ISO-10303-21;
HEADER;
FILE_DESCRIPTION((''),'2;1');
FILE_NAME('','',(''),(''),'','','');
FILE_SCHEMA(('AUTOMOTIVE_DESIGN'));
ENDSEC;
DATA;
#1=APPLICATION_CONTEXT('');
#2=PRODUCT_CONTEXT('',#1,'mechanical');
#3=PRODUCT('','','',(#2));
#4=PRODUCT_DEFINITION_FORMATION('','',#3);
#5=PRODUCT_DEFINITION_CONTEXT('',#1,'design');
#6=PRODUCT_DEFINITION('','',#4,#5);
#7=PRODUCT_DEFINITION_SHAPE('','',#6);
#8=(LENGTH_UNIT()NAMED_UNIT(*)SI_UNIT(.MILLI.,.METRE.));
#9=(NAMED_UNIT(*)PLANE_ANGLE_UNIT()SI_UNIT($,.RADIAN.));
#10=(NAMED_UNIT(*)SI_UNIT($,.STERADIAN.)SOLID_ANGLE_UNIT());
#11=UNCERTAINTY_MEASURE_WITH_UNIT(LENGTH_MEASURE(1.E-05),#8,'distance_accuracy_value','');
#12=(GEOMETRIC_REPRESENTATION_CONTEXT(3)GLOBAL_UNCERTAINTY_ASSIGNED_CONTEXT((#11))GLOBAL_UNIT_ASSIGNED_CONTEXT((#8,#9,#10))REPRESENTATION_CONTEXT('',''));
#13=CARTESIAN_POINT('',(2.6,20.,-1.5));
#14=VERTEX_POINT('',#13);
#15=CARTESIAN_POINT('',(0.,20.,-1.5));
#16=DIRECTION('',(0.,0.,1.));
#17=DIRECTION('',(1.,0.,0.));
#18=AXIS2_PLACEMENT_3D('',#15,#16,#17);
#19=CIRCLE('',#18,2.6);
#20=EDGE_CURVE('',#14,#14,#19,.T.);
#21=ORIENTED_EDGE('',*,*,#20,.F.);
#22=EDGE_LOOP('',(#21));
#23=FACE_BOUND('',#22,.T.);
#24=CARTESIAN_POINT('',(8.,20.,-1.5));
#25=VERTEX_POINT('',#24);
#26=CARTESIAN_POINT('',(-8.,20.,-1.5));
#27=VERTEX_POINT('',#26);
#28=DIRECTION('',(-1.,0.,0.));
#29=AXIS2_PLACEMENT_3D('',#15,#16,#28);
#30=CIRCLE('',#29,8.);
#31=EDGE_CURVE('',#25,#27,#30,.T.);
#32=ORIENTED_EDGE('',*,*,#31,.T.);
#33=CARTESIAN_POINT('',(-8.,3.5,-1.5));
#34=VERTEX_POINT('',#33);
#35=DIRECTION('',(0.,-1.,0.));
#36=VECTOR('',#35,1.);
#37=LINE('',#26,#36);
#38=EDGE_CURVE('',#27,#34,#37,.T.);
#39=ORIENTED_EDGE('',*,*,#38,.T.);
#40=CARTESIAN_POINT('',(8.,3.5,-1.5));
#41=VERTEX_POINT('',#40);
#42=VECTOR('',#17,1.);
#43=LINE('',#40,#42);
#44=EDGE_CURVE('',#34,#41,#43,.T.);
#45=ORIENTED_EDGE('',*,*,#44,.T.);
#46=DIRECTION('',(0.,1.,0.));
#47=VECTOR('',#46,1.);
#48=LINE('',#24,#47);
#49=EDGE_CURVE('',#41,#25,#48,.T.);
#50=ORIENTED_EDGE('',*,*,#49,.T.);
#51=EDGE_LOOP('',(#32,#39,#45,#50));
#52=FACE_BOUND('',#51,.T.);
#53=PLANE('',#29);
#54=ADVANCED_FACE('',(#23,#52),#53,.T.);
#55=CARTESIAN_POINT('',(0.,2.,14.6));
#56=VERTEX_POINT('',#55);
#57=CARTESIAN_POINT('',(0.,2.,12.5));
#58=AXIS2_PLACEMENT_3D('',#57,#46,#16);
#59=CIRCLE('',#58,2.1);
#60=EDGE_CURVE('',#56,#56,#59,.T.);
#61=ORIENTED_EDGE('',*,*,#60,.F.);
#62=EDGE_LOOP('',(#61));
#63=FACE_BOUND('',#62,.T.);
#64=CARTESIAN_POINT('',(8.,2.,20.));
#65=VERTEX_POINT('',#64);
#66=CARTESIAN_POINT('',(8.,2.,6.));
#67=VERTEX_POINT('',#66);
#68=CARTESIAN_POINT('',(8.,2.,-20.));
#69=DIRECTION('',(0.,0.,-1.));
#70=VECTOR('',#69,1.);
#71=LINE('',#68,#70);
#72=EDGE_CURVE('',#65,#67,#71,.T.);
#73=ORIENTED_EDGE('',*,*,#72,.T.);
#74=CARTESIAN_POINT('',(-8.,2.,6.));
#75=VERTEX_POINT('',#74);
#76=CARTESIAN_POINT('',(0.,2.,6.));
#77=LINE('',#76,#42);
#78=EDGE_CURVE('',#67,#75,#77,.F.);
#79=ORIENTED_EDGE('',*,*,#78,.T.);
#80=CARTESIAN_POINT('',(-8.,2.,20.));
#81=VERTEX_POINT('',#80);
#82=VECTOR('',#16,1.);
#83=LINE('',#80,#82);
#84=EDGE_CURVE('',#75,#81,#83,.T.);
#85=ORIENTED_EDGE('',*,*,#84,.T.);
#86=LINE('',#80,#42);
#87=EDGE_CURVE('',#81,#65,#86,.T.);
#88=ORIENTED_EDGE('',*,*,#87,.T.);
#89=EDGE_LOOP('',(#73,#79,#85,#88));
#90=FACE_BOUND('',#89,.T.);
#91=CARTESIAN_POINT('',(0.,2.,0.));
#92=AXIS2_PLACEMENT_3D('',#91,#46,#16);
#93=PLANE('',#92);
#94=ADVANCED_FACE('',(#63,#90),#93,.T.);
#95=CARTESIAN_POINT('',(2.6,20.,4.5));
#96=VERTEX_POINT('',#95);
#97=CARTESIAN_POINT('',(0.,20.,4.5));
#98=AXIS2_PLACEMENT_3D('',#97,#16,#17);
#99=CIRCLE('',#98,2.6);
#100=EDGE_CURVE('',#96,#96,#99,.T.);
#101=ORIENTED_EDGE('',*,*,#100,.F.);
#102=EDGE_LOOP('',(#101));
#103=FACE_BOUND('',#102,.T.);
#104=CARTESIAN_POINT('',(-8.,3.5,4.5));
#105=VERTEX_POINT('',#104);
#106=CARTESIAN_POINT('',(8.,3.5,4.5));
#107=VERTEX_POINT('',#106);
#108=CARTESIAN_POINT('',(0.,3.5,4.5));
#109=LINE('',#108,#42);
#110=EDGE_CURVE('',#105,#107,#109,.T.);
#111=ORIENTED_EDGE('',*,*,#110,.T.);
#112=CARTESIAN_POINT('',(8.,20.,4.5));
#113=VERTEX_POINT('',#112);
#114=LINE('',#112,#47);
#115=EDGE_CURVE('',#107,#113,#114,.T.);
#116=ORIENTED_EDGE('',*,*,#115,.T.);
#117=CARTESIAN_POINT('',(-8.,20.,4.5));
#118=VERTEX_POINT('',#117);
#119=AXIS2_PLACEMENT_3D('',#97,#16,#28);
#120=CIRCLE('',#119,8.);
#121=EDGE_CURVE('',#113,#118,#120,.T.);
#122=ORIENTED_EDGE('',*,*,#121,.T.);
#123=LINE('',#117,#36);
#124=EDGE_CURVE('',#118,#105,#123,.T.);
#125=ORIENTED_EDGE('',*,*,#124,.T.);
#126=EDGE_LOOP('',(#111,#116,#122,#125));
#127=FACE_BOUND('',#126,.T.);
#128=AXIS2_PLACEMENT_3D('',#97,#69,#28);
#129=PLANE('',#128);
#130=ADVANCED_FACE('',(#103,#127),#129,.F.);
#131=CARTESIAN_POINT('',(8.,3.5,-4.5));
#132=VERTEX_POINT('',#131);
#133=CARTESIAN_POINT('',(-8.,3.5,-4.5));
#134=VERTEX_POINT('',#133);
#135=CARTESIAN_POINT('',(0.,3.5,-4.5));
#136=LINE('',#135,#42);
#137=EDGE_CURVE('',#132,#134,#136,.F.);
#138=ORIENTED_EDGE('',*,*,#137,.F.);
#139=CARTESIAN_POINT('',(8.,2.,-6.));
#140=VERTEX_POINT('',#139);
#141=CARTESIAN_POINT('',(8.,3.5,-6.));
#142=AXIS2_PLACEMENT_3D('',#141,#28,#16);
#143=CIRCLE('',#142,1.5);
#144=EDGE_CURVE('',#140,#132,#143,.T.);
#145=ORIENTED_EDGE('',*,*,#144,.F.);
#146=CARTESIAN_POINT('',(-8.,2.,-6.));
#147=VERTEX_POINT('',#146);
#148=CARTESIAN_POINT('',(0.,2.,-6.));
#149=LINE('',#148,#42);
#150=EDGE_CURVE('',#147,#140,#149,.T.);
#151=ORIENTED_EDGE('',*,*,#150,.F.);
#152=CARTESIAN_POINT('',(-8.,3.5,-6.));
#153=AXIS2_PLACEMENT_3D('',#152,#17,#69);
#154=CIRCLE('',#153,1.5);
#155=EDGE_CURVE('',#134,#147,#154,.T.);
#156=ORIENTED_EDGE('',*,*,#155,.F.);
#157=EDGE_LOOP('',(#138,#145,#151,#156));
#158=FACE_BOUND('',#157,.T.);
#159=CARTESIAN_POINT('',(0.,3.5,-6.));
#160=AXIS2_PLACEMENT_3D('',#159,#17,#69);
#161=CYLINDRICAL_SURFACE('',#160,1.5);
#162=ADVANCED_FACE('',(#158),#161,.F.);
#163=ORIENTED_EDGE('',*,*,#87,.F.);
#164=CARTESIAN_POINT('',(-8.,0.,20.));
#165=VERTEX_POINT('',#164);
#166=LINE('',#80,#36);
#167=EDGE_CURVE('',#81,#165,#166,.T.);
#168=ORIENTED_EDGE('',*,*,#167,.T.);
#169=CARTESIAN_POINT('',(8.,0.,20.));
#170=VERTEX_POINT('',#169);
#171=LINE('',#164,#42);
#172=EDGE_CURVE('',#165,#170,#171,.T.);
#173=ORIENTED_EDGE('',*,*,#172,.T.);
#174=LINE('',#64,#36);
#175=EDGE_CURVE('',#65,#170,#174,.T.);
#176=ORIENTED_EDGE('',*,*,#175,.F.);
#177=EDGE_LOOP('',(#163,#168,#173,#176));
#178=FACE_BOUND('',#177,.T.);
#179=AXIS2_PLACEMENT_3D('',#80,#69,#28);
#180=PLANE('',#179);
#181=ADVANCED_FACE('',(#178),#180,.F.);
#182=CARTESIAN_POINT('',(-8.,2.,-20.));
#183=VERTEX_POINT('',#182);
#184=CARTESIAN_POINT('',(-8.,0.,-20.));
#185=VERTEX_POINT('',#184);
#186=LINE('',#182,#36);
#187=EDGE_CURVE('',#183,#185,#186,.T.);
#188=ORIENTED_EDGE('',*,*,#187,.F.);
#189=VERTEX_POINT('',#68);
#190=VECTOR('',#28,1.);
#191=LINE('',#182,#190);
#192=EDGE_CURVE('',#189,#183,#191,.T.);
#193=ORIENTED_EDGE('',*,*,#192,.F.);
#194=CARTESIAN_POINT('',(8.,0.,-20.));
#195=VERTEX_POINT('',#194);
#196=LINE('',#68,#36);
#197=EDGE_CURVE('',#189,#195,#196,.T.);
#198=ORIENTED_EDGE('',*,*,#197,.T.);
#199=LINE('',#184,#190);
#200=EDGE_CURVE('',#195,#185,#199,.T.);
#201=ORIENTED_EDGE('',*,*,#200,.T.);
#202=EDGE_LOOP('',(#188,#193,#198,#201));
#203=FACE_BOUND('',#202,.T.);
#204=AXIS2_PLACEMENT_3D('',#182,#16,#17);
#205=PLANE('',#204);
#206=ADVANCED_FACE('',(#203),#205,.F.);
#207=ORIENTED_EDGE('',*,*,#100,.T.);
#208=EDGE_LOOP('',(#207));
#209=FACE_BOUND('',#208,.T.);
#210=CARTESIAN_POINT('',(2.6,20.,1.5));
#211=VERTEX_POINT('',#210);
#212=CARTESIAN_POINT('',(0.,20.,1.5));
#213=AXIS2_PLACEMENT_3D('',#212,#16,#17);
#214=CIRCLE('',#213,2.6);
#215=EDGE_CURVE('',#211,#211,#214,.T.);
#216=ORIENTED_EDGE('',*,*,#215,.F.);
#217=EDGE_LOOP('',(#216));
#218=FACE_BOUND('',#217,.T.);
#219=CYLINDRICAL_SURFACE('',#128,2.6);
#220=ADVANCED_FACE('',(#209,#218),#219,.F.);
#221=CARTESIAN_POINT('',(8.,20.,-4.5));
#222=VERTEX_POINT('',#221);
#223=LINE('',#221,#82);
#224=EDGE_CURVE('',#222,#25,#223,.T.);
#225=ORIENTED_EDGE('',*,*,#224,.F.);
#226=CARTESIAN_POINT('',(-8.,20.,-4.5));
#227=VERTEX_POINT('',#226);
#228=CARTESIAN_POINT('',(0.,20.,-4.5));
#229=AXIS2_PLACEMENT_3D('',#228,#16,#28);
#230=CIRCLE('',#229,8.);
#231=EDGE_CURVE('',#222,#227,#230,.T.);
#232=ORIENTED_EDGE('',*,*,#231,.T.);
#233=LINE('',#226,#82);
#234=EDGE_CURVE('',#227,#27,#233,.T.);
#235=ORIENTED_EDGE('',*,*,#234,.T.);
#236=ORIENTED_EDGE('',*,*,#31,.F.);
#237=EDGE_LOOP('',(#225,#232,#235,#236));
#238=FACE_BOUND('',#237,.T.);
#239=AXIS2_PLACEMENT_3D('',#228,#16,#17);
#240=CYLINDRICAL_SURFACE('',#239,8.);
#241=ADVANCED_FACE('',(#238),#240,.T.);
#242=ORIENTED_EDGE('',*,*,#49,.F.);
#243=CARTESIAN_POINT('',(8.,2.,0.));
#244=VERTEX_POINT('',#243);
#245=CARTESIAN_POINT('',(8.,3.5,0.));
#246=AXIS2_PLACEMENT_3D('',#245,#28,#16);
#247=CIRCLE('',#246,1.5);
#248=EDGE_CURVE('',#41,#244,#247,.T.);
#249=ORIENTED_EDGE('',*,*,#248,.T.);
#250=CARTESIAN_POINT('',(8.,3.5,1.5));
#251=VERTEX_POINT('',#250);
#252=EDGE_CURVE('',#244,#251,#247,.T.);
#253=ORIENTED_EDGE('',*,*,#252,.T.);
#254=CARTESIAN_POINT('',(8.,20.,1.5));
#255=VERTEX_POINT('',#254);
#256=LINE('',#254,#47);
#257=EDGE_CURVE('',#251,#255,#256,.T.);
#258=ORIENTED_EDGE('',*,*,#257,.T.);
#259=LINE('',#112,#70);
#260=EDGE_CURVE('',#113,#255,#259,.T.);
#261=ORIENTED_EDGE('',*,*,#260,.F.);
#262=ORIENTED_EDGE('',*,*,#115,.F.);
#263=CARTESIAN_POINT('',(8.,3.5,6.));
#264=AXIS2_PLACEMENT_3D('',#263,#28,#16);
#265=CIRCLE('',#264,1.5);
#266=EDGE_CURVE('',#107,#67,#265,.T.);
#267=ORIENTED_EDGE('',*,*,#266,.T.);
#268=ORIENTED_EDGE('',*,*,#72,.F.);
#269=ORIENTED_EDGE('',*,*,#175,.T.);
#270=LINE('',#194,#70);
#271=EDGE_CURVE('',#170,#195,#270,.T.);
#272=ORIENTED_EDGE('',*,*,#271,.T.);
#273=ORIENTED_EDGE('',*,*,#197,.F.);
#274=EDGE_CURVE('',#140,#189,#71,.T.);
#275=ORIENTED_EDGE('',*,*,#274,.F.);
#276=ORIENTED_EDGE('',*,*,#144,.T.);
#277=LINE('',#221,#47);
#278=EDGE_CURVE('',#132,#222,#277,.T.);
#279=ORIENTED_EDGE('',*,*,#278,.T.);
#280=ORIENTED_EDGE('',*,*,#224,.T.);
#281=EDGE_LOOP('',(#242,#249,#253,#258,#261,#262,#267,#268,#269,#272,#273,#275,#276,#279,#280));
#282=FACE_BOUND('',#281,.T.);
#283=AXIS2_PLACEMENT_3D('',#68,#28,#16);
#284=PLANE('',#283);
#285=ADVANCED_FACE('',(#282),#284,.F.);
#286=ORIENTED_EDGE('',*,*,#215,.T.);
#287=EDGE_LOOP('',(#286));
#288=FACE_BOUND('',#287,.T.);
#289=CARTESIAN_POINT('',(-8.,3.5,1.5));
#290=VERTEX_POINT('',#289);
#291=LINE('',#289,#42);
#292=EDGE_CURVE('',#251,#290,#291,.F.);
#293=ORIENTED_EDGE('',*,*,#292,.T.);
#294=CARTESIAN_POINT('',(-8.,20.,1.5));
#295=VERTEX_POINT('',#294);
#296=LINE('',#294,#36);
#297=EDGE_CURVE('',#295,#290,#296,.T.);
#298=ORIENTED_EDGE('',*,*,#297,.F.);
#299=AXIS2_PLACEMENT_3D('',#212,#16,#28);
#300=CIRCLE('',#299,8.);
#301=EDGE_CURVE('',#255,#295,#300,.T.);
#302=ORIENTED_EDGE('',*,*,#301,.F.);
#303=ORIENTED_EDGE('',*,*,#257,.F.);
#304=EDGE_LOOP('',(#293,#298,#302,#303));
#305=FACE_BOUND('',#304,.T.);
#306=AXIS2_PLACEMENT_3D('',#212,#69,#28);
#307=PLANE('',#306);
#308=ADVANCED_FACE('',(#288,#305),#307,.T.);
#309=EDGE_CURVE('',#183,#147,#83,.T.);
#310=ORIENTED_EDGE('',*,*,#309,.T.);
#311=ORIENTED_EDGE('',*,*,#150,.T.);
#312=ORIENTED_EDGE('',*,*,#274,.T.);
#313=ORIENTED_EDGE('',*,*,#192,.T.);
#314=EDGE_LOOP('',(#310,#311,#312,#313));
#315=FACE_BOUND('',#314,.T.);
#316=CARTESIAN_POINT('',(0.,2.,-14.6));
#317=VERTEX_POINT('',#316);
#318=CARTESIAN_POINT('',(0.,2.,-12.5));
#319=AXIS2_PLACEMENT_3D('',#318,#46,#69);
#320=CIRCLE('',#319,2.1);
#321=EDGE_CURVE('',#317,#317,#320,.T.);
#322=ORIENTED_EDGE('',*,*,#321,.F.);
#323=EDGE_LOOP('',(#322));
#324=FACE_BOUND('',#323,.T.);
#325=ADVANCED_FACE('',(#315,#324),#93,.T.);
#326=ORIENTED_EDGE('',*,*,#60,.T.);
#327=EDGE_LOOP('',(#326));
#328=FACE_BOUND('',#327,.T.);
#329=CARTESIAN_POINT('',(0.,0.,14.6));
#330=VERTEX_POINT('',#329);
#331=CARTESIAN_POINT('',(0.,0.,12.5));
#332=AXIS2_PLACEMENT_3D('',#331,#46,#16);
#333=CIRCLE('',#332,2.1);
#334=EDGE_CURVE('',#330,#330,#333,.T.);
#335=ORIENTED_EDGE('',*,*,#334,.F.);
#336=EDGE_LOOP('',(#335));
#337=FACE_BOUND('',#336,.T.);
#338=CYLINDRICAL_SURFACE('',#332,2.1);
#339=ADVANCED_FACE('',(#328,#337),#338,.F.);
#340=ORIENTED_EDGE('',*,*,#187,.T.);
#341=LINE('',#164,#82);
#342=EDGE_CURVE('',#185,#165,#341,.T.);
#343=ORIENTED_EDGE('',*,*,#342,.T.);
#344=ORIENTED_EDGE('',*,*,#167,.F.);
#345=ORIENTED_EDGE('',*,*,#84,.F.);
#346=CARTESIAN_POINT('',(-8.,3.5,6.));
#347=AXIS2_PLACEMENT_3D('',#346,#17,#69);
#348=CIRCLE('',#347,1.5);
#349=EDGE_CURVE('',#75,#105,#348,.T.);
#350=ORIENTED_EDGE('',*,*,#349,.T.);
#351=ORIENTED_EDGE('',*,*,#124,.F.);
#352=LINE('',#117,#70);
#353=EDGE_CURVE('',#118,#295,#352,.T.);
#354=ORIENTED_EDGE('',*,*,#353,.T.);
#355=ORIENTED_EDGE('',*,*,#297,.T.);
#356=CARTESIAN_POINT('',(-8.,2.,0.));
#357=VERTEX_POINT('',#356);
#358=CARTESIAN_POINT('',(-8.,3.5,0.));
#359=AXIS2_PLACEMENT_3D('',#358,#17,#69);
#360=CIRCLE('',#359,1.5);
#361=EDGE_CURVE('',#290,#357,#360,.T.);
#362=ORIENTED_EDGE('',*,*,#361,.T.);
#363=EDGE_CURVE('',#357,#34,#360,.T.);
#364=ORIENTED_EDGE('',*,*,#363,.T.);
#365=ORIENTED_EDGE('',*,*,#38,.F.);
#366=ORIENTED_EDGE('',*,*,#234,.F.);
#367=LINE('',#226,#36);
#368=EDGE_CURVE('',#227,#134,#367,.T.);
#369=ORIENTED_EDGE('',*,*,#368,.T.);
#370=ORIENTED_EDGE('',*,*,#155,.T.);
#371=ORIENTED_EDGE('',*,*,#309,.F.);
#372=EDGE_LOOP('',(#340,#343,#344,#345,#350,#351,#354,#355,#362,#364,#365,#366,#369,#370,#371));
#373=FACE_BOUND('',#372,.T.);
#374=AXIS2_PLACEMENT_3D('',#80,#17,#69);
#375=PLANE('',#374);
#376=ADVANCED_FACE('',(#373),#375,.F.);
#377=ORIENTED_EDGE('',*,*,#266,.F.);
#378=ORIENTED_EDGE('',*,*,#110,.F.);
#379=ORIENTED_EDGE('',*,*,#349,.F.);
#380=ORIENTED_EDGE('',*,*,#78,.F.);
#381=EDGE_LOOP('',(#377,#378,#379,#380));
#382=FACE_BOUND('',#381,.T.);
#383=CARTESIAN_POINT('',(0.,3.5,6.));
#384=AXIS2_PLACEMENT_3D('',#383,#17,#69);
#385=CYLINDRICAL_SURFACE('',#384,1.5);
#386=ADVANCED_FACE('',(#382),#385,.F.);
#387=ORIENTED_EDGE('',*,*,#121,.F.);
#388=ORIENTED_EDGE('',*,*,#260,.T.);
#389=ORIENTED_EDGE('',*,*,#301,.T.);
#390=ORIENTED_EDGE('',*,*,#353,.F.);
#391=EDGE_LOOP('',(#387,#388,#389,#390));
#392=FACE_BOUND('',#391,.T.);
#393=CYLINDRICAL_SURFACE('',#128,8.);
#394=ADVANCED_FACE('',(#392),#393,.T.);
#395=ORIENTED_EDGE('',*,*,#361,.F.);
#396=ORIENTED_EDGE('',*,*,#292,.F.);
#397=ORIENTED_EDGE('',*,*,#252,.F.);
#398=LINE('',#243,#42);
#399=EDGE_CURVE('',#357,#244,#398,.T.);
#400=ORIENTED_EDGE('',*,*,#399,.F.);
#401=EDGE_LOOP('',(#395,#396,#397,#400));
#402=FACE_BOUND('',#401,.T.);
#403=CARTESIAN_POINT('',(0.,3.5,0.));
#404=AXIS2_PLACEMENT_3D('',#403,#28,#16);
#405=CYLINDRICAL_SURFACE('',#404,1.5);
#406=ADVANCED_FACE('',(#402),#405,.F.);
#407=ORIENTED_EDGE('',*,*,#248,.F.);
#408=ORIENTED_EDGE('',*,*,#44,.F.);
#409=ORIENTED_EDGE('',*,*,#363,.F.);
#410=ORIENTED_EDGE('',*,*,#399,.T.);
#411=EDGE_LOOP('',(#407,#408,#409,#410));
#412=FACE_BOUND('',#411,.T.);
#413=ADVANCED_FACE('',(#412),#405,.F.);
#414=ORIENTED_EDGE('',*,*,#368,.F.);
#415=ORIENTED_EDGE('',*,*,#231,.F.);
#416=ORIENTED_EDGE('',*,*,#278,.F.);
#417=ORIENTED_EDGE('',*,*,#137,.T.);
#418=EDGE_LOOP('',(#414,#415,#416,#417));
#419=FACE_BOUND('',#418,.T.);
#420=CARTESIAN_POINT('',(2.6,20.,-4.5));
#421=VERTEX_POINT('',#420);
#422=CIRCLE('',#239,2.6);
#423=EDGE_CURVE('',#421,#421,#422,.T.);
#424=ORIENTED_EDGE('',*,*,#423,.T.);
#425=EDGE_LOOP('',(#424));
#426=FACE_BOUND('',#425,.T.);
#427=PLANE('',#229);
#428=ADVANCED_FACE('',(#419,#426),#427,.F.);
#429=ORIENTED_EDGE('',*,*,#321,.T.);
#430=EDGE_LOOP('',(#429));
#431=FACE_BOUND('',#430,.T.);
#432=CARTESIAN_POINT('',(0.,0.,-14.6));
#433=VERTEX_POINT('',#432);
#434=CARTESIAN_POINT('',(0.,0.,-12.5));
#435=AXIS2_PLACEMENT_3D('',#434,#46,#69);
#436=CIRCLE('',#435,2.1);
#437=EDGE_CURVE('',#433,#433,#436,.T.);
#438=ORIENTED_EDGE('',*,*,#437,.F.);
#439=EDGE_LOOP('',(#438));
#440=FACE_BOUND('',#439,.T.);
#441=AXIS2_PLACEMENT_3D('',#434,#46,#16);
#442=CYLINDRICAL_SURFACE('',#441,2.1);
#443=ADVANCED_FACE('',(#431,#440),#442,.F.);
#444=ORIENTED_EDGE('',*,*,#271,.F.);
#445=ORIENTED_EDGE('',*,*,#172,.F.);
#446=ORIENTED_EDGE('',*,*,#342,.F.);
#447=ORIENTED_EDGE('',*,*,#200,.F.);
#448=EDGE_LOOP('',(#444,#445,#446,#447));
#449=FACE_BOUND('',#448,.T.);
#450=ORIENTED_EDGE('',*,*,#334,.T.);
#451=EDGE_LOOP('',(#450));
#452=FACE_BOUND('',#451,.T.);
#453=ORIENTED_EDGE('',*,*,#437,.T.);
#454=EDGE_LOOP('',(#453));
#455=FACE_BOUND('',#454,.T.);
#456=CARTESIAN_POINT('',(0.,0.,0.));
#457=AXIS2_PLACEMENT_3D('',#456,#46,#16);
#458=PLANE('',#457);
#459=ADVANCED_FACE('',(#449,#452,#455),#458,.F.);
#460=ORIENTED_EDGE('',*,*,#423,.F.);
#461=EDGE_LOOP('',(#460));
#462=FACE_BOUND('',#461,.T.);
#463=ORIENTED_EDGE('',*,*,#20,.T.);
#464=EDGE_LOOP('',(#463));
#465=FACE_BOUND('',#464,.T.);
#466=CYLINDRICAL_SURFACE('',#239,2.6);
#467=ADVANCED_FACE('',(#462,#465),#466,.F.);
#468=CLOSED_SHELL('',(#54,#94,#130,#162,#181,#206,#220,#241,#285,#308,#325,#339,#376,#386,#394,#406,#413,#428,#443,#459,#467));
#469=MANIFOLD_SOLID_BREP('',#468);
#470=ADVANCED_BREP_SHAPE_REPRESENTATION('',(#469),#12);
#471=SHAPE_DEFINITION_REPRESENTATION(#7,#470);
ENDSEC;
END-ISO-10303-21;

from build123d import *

# Parameters (mm, degrees)
SKETCH_2_W          = 16
SKETCH_2_H          = 40
EXTRUDE_1_DEPTH     = 2
EXTRUDE_START       = 1.5
SKETCH_4_R          = 2.6
EXTRUDE_2_DEPTH     = 3
FILLET_2_R          = 1.5
SKETCH_5_R          = 2.1
CUT_EXTRUDE_1_DEPTH = 34.763886032


with BuildPart() as part:
    # 草圖2 → 填料-伸長1 (new body)
    with BuildSketch(Plane(origin=(0, 0, 0), x_dir=(1, 0, 0), z_dir=(0, 1, 0))):
        Rectangle(SKETCH_2_W, SKETCH_2_H)
    extrude(amount=EXTRUDE_1_DEPTH)

    # 草圖4 → 填料-伸長2 (add)
    with BuildSketch(Plane.XY.offset(EXTRUDE_START)):
        with BuildLine():
            Line((8, 20), (8, 2))
            Line((8, 2), (-8, 2))
            Line((-8, 2), (-8, 20))
            ThreePointArc((-8, 20), (0, 28), (8, 20))
        make_face()
        with Locations((0, 20)):
            Circle(SKETCH_4_R, mode=Mode.SUBTRACT)
    extrude_2 = extrude(amount=EXTRUDE_2_DEPTH)

    # 鏡射1: 填料-伸長2 across plane
    add(extrude_2.mirror(Plane.XY))

    # 圓角2
    fillet_2_edges = [part.edges().sort_by_distance(p)[0] for p in [
        (0, 2, 4.5),
        (0, 2, 1.5),
        (0, 2, -4.5),
        (0, 2, -1.5),
    ]]
    fillet(fillet_2_edges, radius=FILLET_2_R - 0.0001)  # a hair under: the kernel refuses the full size

    # 草圖5 → 除料-伸長1 (cut, through all)
    with BuildSketch(Plane(origin=(0, 2, 0), x_dir=(1, 0, 0), z_dir=(0, 1, 0))):
        with Locations(Location((0, -12.5, 0), (0, 0, 270))):
            Circle(SKETCH_5_R)
        with Locations(Location((0, 12.5, 0), (0, 0, 90))):
            Circle(SKETCH_5_R)
    extrude(amount=-CUT_EXTRUDE_1_DEPTH, mode=Mode.SUBTRACT)


solid = part.part
